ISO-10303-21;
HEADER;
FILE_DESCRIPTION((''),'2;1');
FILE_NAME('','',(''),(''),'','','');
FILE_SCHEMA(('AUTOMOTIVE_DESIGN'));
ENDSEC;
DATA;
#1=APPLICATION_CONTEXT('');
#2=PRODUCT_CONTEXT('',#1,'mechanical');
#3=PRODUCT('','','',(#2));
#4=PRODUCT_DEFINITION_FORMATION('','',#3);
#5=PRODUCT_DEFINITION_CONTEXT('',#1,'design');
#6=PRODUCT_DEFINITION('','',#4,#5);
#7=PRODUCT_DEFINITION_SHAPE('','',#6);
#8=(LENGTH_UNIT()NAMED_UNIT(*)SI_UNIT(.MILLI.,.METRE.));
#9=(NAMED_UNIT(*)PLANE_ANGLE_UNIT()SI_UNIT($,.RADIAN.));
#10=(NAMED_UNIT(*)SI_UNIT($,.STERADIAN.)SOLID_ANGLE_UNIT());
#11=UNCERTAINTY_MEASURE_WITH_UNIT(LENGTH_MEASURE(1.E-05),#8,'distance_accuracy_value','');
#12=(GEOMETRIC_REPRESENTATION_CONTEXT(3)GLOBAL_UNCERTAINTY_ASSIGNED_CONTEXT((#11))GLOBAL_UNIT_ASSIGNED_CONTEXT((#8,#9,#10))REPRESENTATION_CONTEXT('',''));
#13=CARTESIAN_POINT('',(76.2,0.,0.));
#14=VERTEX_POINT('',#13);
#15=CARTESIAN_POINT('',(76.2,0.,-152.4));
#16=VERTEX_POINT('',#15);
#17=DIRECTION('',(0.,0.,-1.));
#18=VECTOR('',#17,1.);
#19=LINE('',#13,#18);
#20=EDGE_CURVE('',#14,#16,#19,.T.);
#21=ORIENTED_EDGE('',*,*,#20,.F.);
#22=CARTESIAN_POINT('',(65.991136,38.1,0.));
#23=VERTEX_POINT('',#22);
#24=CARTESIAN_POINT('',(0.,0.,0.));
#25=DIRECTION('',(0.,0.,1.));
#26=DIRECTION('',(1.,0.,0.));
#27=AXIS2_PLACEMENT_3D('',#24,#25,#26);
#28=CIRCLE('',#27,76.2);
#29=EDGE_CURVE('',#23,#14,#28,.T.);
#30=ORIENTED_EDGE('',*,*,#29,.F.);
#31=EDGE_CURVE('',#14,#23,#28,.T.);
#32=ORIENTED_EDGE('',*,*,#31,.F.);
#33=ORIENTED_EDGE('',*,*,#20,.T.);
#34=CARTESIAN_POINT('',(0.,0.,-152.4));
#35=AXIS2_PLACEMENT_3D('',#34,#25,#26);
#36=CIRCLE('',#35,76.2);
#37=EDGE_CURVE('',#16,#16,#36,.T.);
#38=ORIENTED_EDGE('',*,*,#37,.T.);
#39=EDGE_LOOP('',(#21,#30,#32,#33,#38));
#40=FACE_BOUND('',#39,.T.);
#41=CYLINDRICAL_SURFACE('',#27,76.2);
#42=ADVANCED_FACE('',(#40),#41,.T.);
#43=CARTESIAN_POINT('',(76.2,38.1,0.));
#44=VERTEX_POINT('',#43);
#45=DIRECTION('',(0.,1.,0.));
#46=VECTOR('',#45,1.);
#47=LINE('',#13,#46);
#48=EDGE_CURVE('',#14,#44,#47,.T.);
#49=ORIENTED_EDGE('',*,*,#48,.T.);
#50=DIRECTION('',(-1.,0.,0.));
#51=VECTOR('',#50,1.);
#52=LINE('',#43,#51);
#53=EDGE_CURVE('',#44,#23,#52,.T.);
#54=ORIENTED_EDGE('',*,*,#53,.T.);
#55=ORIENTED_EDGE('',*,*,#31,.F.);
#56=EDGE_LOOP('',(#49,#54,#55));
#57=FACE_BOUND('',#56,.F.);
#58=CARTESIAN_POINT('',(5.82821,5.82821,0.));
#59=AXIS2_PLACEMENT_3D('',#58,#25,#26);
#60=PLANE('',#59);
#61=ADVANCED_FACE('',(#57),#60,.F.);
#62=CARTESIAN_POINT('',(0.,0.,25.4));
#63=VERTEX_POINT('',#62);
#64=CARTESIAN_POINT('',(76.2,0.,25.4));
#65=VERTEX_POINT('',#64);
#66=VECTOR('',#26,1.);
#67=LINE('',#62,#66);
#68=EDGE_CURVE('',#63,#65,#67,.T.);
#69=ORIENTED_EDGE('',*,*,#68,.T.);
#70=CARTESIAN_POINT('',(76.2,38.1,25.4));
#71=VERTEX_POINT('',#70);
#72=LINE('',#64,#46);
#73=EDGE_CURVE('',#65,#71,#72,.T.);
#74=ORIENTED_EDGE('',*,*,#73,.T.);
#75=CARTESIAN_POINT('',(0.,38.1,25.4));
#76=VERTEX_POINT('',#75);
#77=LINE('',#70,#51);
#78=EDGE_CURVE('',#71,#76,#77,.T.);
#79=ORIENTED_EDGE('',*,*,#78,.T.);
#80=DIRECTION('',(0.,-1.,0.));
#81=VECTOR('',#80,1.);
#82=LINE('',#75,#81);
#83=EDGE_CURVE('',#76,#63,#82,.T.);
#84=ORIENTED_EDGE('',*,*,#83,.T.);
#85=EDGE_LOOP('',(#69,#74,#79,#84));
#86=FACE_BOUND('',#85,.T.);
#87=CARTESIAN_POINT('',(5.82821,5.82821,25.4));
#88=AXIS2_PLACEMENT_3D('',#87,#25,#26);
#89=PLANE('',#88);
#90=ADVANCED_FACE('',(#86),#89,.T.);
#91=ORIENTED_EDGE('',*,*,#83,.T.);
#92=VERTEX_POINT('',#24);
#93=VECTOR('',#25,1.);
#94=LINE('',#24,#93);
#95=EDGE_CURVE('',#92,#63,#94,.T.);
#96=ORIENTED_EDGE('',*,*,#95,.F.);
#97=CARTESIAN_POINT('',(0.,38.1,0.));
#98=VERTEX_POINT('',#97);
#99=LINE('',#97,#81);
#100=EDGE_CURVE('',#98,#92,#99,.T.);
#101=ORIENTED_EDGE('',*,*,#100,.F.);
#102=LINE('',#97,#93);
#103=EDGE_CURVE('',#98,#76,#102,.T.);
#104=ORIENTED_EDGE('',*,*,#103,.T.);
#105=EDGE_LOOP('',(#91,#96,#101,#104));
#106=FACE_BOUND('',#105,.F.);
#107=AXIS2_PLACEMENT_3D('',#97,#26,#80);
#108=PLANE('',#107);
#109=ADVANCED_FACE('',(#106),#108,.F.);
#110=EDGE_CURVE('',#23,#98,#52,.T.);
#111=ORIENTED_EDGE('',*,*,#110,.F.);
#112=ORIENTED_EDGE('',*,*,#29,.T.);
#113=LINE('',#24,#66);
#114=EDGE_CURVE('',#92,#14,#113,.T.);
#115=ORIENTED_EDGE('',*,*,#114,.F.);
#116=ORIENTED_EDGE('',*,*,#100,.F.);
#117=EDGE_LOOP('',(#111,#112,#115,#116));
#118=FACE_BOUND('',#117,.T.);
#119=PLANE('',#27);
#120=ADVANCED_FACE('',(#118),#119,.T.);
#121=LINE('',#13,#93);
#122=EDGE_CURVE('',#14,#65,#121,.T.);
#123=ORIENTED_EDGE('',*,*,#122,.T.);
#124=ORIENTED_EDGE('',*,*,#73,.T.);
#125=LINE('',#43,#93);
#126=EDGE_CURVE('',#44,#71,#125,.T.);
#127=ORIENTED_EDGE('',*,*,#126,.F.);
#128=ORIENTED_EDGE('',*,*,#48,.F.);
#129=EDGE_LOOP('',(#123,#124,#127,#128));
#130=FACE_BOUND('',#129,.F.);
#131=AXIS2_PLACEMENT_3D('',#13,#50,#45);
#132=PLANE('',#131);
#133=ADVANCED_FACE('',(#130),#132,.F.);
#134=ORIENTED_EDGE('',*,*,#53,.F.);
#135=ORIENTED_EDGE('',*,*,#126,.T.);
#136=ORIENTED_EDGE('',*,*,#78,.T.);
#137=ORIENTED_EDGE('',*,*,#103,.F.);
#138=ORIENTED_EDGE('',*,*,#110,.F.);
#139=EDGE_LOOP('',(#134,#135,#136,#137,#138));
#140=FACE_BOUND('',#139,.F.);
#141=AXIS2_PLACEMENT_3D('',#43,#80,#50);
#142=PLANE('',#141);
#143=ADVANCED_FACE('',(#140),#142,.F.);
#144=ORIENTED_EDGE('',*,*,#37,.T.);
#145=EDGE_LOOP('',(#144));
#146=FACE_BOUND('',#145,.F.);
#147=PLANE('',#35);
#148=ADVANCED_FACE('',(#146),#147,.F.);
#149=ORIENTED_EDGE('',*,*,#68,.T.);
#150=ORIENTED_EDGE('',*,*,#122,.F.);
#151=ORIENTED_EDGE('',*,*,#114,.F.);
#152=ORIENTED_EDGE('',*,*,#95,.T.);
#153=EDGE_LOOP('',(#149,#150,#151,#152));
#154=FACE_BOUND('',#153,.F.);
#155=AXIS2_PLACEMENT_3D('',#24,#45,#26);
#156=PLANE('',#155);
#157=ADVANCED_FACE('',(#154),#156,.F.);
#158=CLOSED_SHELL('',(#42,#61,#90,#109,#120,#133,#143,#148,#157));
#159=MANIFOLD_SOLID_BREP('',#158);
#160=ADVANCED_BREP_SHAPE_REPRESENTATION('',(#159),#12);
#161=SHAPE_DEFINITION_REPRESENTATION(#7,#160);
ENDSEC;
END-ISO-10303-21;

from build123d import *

# Parameters (mm, degrees)
F2_DEPTH = 25.4
F0_R     = 76.2
F3_DEPTH = 152.4
F4_DEPTH = 152.4


# Not quite as in the source:
# - an extrude ends at something that could not be found from the text; its depth is read off the source's solid


with BuildPart() as f2:
    # F1 (on Top) → F2 (new body)
    with BuildSketch(Plane.XY):
        with BuildLine():
            Line((0, 19.05), (0, 0))
            Line((0, 0), (19.05, 0))
            ThreePointArc((19.05, 0), (5.5796158184, 5.5796158184), (0, 19.05))
        make_face()
        with BuildLine():
            ThreePointArc((0, 19.05), (5.5796158184, 5.5796158184), (19.05, 0))
            Line((19.05, 0), (57.15, 0))
            ThreePointArc((57.15, 0), (70.6203841816, 5.5796158184), (76.2, 19.05))
            ThreePointArc((76.2, 19.05), (70.6203841816, 32.5203841816), (57.15, 38.1))
            Line((57.15, 38.1), (19.05, 38.1))
            ThreePointArc((19.05, 38.1), (5.5796158184, 32.5203841816), (0, 19.05))
        make_face()
        with BuildLine():
            Line((0, 38.1), (0, 19.05))
            ThreePointArc((0, 19.05), (5.5796158184, 32.5203841816), (19.05, 38.1))
            Line((19.05, 38.1), (0, 38.1))
        make_face()
        with BuildLine():
            ThreePointArc((76.2, 19.05), (70.6203841816, 5.5796158184), (57.15, 0))
            Line((57.15, 0), (76.2, 0))
            Line((76.2, 0), (76.2, 19.05))
        make_face()
        with BuildLine():
            ThreePointArc((57.15, 38.1), (70.6203841816, 32.5203841816), (76.2, 19.05))
            Line((76.2, 19.05), (76.2, 38.1))
            Line((76.2, 38.1), (57.15, 38.1))
        make_face()
    extrude(amount=F2_DEPTH)

    # F0 (on Top) → F3 (join, through all)
    with BuildSketch(Plane.XY):
        Circle(F0_R)
    extrude(amount=-F3_DEPTH)

    # F0 (on Top) → F4 (join)
    with BuildSketch(Plane.XY):
        Circle(F0_R)
    extrude(amount=-F4_DEPTH)


solid = f2.part
